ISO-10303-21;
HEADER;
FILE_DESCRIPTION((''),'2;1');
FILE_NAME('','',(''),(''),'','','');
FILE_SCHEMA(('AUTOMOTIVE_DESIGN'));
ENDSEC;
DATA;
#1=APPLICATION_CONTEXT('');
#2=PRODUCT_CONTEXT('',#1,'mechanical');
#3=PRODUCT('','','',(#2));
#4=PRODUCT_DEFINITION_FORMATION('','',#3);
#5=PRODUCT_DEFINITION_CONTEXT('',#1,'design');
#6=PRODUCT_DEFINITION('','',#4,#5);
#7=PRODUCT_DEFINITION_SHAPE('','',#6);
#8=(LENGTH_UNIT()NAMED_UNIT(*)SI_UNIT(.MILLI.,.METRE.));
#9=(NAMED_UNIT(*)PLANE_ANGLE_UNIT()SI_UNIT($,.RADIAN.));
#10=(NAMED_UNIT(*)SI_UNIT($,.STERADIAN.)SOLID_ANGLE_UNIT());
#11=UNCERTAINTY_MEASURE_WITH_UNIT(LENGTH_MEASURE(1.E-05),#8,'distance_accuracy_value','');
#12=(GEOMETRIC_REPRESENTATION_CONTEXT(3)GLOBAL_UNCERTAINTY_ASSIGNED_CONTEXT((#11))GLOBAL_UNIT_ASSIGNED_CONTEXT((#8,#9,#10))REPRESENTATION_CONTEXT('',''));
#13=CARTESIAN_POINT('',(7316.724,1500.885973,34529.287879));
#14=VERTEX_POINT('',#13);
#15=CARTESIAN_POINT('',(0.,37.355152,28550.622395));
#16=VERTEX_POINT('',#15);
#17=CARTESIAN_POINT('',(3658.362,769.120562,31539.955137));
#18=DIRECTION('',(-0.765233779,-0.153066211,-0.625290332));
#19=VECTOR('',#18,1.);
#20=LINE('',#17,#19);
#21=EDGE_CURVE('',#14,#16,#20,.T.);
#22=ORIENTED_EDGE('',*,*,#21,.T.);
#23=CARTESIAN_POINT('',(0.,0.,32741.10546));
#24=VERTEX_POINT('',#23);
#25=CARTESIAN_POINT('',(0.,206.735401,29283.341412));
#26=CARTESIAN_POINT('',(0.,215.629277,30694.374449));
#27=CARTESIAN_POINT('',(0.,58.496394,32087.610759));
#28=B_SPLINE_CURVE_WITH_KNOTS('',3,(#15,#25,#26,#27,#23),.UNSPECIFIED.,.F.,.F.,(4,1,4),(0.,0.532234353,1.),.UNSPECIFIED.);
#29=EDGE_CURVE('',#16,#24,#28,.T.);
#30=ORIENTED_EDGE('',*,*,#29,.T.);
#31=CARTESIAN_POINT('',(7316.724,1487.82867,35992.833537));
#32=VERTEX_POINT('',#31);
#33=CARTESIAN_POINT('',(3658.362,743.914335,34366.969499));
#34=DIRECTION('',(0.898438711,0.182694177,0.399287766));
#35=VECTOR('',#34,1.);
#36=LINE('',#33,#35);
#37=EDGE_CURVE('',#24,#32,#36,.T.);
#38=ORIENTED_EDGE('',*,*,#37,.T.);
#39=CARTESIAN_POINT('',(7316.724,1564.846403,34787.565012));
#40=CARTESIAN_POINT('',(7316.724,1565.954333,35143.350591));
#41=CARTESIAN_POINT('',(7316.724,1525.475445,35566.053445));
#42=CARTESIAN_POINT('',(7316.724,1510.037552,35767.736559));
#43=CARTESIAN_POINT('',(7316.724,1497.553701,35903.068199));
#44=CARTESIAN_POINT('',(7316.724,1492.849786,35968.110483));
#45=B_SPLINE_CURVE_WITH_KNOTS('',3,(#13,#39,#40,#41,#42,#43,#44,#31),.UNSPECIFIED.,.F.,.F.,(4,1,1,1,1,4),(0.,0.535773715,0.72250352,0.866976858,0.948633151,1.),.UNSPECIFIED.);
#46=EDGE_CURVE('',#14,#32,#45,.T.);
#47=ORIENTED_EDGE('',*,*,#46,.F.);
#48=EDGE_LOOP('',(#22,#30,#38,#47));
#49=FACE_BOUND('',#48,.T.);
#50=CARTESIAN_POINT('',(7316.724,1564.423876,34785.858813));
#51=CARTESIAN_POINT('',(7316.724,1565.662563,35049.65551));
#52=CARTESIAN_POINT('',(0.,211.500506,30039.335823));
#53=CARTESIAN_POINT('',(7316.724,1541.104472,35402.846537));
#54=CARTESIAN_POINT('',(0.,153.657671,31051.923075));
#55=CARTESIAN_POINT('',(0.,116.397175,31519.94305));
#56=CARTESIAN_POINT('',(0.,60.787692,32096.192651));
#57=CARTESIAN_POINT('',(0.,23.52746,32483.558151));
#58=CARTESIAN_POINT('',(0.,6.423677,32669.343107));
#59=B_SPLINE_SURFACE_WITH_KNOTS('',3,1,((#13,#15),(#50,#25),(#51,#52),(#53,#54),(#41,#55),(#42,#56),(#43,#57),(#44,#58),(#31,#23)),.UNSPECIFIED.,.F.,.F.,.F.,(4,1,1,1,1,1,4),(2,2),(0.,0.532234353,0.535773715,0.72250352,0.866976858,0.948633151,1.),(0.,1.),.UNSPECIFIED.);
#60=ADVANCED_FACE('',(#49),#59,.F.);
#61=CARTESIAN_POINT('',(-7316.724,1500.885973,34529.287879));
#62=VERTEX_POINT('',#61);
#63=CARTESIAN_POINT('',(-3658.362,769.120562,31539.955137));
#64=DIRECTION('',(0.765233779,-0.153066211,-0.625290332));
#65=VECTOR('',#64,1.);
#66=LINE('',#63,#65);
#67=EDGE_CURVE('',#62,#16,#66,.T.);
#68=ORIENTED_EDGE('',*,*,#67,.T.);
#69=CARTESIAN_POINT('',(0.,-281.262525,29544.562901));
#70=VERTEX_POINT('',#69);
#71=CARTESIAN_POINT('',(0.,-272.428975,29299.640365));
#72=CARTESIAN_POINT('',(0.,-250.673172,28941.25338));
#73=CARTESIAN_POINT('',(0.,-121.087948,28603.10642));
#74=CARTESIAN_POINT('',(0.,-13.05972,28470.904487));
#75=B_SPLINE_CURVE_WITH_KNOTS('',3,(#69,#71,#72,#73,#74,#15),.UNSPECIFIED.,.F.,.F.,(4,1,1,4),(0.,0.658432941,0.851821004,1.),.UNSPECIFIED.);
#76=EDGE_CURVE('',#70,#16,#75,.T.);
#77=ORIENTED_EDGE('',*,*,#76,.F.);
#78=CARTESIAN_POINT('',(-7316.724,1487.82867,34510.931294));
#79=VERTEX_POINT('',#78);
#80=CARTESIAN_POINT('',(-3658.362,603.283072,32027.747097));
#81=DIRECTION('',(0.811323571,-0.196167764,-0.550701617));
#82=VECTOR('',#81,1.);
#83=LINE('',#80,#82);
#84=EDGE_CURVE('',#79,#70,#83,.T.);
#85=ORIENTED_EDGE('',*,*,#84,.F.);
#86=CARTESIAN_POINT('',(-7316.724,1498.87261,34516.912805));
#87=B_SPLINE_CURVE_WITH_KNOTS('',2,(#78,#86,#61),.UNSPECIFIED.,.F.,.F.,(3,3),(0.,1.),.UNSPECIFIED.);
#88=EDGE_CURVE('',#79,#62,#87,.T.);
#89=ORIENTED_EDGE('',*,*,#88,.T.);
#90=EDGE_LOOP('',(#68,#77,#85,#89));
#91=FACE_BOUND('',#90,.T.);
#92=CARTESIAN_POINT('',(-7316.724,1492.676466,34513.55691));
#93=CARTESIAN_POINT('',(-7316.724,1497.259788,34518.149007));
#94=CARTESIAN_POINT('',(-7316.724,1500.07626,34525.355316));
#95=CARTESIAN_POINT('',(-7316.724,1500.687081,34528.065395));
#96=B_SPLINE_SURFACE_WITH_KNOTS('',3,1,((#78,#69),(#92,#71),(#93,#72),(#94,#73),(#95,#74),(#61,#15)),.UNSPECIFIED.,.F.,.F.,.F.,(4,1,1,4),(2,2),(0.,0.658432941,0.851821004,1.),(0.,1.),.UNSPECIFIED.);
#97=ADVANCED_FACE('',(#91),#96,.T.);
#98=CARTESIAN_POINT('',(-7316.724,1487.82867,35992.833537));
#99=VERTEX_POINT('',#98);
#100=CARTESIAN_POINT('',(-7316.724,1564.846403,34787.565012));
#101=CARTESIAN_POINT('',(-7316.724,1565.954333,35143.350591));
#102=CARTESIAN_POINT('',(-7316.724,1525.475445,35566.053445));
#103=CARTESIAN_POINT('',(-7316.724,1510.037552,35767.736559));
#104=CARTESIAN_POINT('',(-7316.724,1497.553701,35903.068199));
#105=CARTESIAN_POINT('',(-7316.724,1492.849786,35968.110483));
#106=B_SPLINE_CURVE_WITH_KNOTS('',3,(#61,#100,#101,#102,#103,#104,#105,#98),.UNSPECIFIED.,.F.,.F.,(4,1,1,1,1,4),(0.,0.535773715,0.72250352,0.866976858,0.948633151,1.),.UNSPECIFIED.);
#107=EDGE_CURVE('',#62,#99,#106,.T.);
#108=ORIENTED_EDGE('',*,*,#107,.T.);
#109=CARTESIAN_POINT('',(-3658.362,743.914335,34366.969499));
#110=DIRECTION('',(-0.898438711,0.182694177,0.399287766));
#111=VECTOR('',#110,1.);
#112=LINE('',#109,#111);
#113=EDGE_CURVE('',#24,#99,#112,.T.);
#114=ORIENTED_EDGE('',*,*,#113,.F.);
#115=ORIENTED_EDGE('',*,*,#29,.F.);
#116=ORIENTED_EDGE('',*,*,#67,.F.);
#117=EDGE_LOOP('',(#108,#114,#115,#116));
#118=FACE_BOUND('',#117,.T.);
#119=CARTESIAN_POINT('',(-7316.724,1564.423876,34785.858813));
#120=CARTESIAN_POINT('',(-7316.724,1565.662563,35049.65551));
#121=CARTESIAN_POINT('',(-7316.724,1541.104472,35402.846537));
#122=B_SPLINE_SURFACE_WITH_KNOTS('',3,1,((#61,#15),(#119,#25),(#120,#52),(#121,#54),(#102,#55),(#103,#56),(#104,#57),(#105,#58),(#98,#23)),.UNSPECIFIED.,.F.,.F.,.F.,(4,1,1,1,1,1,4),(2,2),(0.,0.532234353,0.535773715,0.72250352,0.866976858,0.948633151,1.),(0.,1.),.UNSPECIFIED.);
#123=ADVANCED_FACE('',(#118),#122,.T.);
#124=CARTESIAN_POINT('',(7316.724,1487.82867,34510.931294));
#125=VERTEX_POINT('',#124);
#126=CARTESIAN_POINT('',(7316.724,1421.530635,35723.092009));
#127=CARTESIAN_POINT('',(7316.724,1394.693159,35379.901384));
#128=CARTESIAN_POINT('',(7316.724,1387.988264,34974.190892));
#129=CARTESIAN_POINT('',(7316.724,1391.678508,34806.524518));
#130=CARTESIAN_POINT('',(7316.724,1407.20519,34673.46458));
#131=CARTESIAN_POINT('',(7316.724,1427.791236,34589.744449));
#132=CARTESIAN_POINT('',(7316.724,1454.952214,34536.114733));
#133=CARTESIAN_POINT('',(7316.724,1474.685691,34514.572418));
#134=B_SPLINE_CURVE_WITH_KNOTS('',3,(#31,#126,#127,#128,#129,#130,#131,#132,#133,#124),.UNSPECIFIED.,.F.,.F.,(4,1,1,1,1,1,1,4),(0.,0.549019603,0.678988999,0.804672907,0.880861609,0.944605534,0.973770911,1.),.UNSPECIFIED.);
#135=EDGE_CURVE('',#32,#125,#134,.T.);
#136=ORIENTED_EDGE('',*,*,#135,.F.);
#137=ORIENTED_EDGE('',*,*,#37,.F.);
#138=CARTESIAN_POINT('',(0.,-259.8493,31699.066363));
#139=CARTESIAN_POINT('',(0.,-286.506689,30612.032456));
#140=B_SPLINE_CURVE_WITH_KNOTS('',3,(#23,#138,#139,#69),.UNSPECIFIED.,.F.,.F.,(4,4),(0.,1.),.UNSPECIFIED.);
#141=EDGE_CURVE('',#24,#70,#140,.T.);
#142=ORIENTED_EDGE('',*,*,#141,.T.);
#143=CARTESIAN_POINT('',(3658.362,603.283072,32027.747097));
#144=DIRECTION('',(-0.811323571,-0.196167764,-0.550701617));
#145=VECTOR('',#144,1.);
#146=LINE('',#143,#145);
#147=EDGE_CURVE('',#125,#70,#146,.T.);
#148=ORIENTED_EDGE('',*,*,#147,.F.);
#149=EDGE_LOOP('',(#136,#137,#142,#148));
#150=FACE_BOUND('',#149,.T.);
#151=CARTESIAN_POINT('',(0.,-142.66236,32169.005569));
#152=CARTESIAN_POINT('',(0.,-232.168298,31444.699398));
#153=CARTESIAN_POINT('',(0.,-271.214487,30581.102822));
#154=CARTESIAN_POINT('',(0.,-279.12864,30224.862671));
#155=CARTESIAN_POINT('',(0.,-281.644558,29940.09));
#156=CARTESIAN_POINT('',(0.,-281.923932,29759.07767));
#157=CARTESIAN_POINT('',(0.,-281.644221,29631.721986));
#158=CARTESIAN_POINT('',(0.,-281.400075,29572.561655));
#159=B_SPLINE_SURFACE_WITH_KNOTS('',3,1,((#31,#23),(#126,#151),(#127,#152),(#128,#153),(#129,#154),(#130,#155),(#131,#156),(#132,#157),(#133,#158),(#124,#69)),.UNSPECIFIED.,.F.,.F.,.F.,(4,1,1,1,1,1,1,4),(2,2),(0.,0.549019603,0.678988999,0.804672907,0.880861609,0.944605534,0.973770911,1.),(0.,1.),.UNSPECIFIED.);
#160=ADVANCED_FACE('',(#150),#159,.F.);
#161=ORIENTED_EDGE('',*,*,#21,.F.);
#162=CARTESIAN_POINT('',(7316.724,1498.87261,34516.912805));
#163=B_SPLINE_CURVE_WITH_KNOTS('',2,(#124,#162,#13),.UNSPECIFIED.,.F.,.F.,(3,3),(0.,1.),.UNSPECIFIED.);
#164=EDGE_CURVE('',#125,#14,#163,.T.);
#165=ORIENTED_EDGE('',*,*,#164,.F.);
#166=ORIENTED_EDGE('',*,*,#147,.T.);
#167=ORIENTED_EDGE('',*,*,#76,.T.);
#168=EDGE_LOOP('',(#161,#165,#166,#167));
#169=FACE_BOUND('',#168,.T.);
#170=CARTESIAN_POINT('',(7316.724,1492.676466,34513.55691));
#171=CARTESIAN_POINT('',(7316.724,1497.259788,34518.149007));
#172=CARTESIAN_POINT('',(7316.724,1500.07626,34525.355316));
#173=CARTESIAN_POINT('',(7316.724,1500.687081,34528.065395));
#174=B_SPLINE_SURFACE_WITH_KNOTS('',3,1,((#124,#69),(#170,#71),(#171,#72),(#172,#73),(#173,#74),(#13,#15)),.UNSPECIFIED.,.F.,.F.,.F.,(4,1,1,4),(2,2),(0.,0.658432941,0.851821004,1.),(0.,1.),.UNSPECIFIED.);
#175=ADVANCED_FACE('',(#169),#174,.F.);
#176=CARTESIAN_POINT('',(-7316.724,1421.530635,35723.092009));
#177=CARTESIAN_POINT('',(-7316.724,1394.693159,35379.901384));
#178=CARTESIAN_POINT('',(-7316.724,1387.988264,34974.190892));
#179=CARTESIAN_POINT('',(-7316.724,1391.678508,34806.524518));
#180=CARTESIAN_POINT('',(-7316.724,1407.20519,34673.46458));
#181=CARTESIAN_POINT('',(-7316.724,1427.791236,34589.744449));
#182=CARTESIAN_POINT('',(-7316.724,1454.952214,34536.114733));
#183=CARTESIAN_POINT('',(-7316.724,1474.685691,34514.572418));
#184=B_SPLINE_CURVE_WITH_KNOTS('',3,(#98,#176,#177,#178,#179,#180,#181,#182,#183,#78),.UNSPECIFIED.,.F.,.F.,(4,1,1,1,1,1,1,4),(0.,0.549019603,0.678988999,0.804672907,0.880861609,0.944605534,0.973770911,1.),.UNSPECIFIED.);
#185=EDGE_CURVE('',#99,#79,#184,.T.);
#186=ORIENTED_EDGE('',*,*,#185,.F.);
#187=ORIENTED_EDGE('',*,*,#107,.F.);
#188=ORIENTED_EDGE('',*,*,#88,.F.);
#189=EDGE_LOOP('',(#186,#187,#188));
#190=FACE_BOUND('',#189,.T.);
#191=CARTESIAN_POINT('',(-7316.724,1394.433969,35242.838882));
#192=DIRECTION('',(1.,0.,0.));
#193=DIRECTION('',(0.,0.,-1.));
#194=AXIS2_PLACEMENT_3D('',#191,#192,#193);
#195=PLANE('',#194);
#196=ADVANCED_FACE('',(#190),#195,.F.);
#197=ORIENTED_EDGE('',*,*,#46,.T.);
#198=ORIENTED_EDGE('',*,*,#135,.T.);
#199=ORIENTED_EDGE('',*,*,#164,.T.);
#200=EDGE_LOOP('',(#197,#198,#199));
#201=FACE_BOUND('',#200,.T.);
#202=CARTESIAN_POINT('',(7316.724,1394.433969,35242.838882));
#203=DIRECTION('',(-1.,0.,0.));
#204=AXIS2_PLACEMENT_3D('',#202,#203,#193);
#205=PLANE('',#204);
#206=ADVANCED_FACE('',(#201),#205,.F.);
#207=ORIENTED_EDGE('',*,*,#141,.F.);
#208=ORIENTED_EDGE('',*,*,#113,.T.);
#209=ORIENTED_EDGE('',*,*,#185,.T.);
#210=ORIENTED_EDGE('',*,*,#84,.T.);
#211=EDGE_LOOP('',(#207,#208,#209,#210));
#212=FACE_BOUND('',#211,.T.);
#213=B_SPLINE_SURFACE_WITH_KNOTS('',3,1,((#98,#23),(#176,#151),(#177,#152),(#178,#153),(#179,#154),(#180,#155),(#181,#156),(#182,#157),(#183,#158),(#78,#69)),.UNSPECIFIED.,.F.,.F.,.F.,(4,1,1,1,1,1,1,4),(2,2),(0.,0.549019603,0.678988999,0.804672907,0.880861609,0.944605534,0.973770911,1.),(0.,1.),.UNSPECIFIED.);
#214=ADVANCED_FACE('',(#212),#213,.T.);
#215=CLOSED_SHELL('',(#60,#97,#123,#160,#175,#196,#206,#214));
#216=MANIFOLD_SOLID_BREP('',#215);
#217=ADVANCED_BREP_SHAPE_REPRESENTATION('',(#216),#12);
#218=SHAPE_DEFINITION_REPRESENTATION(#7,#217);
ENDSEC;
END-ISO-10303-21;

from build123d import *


with BuildPart() as part:
    # Loft1: read off the stored shape, not the designer's step
    # Loft1: loft between two sections, ruled curve by curve
    loft1_from = [
        Edge.make_bspline([(-7316.724, 1487.828669902, 35992.833537261), (-7316.724, 1421.530634915, 35723.092008862), (-7316.724, 1394.693159295, 35379.901383841), (-7316.724, 1387.988264311, 34974.190892011), (-7316.724, 1391.678508239, 34806.524518143), (-7316.724, 1407.205189879, 34673.46457986), (-7316.724, 1427.791236409, 34589.744448771), (-7316.724, 1454.952214092, 34536.114733088), (-7316.724, 1474.685690702, 34514.572417518), (-7316.724, 1487.828669902, 34510.931294061)], [0, 0, 0, 0, 0.549019603, 0.678988999, 0.804672907, 0.880861609, 0.944605534, 0.973770911, 1, 1, 1, 1], 3),
        Edge.make_bspline([(-7316.724, 1487.828669902, 34510.931294061), (-7316.724, 1492.676465868, 34513.556909875), (-7316.724, 1497.259788361, 34518.149007123), (-7316.724, 1500.076260171, 34525.355315708), (-7316.724, 1500.687080871, 34528.065394871), (-7316.724, 1500.885972938, 34529.287878902)], [0, 0, 0, 0, 0.658432941, 0.851821004, 1, 1, 1, 1], 3),
        Edge.make_bspline([(-7316.724, 1500.885972938, 34529.287878902), (-7316.724, 1564.423875614, 34785.858813384), (-7316.724, 1565.662563216, 35049.655510234), (-7316.724, 1541.104472042, 35402.846537303), (-7316.724, 1525.475445482, 35566.053445124), (-7316.724, 1510.037552147, 35767.7365592), (-7316.724, 1497.553701256, 35903.068198652), (-7316.724, 1492.849785991, 35968.110483148), (-7316.724, 1487.828669902, 35992.833537261)], [0, 0, 0, 0, 0.532234353, 0.535773715, 0.72250352, 0.866976858, 0.948633151, 1, 1, 1, 1], 3),
    ]
    loft1_to = [
        Edge.make_bspline([(0, 0, 32741.10546), (0, -142.662359591, 32169.005568548), (0, -232.168298131, 31444.699397963), (0, -271.214486884, 30581.102822245), (0, -279.128640205, 30224.862671342), (0, -281.644558088, 29940.08999998), (0, -281.923932184, 29759.077669805), (0, -281.64422132, 29631.721986491), (0, -281.400074941, 29572.561654823), (0, -281.262525316, 29544.562900783)], [0, 0, 0, 0, 0.549019603, 0.678988999, 0.804672907, 0.880861609, 0.944605534, 0.973770911, 1, 1, 1, 1], 3),
        Edge.make_bspline([(0, -281.262525316, 29544.562900783), (0, -272.428974899, 29299.640365417), (0, -250.673172157, 28941.253380059), (0, -121.087947726, 28603.106420122), (0, -13.059719976, 28470.904486664), (0, 37.355151767, 28550.622394943)], [0, 0, 0, 0, 0.658432941, 0.851821004, 1, 1, 1, 1], 3),
        Edge.make_bspline([(0, 37.355151767, 28550.622394943), (0, 206.735400994, 29283.341411522), (0, 211.500505822, 30039.335823411), (0, 153.657670514, 31051.923075175), (0, 116.397175309, 31519.943049771), (0, 60.787691696, 32096.192651089), (0, 23.527460083, 32483.558150881), (0, 6.423676977, 32669.343106672), (0, 0, 32741.10546)], [0, 0, 0, 0, 0.532234353, 0.535773715, 0.72250352, 0.866976858, 0.948633151, 1, 1, 1, 1], 3),
    ]
    loft1 = Solid(Shell([*[Face.make_surface_from_curves(loft1_from[k], loft1_to[k]) for k in range(3)], Face(Wire(loft1_from)), Face(Wire(loft1_to))]))
    add(loft1)

    # Mirror1: part across plane


with BuildPart() as part_1:
    add(part.part)
    add(part.part.mirror(Plane(origin=(0, 0, 0), x_dir=(0, 0, 1), z_dir=(1, 0, 0))))


solid = part_1.part
